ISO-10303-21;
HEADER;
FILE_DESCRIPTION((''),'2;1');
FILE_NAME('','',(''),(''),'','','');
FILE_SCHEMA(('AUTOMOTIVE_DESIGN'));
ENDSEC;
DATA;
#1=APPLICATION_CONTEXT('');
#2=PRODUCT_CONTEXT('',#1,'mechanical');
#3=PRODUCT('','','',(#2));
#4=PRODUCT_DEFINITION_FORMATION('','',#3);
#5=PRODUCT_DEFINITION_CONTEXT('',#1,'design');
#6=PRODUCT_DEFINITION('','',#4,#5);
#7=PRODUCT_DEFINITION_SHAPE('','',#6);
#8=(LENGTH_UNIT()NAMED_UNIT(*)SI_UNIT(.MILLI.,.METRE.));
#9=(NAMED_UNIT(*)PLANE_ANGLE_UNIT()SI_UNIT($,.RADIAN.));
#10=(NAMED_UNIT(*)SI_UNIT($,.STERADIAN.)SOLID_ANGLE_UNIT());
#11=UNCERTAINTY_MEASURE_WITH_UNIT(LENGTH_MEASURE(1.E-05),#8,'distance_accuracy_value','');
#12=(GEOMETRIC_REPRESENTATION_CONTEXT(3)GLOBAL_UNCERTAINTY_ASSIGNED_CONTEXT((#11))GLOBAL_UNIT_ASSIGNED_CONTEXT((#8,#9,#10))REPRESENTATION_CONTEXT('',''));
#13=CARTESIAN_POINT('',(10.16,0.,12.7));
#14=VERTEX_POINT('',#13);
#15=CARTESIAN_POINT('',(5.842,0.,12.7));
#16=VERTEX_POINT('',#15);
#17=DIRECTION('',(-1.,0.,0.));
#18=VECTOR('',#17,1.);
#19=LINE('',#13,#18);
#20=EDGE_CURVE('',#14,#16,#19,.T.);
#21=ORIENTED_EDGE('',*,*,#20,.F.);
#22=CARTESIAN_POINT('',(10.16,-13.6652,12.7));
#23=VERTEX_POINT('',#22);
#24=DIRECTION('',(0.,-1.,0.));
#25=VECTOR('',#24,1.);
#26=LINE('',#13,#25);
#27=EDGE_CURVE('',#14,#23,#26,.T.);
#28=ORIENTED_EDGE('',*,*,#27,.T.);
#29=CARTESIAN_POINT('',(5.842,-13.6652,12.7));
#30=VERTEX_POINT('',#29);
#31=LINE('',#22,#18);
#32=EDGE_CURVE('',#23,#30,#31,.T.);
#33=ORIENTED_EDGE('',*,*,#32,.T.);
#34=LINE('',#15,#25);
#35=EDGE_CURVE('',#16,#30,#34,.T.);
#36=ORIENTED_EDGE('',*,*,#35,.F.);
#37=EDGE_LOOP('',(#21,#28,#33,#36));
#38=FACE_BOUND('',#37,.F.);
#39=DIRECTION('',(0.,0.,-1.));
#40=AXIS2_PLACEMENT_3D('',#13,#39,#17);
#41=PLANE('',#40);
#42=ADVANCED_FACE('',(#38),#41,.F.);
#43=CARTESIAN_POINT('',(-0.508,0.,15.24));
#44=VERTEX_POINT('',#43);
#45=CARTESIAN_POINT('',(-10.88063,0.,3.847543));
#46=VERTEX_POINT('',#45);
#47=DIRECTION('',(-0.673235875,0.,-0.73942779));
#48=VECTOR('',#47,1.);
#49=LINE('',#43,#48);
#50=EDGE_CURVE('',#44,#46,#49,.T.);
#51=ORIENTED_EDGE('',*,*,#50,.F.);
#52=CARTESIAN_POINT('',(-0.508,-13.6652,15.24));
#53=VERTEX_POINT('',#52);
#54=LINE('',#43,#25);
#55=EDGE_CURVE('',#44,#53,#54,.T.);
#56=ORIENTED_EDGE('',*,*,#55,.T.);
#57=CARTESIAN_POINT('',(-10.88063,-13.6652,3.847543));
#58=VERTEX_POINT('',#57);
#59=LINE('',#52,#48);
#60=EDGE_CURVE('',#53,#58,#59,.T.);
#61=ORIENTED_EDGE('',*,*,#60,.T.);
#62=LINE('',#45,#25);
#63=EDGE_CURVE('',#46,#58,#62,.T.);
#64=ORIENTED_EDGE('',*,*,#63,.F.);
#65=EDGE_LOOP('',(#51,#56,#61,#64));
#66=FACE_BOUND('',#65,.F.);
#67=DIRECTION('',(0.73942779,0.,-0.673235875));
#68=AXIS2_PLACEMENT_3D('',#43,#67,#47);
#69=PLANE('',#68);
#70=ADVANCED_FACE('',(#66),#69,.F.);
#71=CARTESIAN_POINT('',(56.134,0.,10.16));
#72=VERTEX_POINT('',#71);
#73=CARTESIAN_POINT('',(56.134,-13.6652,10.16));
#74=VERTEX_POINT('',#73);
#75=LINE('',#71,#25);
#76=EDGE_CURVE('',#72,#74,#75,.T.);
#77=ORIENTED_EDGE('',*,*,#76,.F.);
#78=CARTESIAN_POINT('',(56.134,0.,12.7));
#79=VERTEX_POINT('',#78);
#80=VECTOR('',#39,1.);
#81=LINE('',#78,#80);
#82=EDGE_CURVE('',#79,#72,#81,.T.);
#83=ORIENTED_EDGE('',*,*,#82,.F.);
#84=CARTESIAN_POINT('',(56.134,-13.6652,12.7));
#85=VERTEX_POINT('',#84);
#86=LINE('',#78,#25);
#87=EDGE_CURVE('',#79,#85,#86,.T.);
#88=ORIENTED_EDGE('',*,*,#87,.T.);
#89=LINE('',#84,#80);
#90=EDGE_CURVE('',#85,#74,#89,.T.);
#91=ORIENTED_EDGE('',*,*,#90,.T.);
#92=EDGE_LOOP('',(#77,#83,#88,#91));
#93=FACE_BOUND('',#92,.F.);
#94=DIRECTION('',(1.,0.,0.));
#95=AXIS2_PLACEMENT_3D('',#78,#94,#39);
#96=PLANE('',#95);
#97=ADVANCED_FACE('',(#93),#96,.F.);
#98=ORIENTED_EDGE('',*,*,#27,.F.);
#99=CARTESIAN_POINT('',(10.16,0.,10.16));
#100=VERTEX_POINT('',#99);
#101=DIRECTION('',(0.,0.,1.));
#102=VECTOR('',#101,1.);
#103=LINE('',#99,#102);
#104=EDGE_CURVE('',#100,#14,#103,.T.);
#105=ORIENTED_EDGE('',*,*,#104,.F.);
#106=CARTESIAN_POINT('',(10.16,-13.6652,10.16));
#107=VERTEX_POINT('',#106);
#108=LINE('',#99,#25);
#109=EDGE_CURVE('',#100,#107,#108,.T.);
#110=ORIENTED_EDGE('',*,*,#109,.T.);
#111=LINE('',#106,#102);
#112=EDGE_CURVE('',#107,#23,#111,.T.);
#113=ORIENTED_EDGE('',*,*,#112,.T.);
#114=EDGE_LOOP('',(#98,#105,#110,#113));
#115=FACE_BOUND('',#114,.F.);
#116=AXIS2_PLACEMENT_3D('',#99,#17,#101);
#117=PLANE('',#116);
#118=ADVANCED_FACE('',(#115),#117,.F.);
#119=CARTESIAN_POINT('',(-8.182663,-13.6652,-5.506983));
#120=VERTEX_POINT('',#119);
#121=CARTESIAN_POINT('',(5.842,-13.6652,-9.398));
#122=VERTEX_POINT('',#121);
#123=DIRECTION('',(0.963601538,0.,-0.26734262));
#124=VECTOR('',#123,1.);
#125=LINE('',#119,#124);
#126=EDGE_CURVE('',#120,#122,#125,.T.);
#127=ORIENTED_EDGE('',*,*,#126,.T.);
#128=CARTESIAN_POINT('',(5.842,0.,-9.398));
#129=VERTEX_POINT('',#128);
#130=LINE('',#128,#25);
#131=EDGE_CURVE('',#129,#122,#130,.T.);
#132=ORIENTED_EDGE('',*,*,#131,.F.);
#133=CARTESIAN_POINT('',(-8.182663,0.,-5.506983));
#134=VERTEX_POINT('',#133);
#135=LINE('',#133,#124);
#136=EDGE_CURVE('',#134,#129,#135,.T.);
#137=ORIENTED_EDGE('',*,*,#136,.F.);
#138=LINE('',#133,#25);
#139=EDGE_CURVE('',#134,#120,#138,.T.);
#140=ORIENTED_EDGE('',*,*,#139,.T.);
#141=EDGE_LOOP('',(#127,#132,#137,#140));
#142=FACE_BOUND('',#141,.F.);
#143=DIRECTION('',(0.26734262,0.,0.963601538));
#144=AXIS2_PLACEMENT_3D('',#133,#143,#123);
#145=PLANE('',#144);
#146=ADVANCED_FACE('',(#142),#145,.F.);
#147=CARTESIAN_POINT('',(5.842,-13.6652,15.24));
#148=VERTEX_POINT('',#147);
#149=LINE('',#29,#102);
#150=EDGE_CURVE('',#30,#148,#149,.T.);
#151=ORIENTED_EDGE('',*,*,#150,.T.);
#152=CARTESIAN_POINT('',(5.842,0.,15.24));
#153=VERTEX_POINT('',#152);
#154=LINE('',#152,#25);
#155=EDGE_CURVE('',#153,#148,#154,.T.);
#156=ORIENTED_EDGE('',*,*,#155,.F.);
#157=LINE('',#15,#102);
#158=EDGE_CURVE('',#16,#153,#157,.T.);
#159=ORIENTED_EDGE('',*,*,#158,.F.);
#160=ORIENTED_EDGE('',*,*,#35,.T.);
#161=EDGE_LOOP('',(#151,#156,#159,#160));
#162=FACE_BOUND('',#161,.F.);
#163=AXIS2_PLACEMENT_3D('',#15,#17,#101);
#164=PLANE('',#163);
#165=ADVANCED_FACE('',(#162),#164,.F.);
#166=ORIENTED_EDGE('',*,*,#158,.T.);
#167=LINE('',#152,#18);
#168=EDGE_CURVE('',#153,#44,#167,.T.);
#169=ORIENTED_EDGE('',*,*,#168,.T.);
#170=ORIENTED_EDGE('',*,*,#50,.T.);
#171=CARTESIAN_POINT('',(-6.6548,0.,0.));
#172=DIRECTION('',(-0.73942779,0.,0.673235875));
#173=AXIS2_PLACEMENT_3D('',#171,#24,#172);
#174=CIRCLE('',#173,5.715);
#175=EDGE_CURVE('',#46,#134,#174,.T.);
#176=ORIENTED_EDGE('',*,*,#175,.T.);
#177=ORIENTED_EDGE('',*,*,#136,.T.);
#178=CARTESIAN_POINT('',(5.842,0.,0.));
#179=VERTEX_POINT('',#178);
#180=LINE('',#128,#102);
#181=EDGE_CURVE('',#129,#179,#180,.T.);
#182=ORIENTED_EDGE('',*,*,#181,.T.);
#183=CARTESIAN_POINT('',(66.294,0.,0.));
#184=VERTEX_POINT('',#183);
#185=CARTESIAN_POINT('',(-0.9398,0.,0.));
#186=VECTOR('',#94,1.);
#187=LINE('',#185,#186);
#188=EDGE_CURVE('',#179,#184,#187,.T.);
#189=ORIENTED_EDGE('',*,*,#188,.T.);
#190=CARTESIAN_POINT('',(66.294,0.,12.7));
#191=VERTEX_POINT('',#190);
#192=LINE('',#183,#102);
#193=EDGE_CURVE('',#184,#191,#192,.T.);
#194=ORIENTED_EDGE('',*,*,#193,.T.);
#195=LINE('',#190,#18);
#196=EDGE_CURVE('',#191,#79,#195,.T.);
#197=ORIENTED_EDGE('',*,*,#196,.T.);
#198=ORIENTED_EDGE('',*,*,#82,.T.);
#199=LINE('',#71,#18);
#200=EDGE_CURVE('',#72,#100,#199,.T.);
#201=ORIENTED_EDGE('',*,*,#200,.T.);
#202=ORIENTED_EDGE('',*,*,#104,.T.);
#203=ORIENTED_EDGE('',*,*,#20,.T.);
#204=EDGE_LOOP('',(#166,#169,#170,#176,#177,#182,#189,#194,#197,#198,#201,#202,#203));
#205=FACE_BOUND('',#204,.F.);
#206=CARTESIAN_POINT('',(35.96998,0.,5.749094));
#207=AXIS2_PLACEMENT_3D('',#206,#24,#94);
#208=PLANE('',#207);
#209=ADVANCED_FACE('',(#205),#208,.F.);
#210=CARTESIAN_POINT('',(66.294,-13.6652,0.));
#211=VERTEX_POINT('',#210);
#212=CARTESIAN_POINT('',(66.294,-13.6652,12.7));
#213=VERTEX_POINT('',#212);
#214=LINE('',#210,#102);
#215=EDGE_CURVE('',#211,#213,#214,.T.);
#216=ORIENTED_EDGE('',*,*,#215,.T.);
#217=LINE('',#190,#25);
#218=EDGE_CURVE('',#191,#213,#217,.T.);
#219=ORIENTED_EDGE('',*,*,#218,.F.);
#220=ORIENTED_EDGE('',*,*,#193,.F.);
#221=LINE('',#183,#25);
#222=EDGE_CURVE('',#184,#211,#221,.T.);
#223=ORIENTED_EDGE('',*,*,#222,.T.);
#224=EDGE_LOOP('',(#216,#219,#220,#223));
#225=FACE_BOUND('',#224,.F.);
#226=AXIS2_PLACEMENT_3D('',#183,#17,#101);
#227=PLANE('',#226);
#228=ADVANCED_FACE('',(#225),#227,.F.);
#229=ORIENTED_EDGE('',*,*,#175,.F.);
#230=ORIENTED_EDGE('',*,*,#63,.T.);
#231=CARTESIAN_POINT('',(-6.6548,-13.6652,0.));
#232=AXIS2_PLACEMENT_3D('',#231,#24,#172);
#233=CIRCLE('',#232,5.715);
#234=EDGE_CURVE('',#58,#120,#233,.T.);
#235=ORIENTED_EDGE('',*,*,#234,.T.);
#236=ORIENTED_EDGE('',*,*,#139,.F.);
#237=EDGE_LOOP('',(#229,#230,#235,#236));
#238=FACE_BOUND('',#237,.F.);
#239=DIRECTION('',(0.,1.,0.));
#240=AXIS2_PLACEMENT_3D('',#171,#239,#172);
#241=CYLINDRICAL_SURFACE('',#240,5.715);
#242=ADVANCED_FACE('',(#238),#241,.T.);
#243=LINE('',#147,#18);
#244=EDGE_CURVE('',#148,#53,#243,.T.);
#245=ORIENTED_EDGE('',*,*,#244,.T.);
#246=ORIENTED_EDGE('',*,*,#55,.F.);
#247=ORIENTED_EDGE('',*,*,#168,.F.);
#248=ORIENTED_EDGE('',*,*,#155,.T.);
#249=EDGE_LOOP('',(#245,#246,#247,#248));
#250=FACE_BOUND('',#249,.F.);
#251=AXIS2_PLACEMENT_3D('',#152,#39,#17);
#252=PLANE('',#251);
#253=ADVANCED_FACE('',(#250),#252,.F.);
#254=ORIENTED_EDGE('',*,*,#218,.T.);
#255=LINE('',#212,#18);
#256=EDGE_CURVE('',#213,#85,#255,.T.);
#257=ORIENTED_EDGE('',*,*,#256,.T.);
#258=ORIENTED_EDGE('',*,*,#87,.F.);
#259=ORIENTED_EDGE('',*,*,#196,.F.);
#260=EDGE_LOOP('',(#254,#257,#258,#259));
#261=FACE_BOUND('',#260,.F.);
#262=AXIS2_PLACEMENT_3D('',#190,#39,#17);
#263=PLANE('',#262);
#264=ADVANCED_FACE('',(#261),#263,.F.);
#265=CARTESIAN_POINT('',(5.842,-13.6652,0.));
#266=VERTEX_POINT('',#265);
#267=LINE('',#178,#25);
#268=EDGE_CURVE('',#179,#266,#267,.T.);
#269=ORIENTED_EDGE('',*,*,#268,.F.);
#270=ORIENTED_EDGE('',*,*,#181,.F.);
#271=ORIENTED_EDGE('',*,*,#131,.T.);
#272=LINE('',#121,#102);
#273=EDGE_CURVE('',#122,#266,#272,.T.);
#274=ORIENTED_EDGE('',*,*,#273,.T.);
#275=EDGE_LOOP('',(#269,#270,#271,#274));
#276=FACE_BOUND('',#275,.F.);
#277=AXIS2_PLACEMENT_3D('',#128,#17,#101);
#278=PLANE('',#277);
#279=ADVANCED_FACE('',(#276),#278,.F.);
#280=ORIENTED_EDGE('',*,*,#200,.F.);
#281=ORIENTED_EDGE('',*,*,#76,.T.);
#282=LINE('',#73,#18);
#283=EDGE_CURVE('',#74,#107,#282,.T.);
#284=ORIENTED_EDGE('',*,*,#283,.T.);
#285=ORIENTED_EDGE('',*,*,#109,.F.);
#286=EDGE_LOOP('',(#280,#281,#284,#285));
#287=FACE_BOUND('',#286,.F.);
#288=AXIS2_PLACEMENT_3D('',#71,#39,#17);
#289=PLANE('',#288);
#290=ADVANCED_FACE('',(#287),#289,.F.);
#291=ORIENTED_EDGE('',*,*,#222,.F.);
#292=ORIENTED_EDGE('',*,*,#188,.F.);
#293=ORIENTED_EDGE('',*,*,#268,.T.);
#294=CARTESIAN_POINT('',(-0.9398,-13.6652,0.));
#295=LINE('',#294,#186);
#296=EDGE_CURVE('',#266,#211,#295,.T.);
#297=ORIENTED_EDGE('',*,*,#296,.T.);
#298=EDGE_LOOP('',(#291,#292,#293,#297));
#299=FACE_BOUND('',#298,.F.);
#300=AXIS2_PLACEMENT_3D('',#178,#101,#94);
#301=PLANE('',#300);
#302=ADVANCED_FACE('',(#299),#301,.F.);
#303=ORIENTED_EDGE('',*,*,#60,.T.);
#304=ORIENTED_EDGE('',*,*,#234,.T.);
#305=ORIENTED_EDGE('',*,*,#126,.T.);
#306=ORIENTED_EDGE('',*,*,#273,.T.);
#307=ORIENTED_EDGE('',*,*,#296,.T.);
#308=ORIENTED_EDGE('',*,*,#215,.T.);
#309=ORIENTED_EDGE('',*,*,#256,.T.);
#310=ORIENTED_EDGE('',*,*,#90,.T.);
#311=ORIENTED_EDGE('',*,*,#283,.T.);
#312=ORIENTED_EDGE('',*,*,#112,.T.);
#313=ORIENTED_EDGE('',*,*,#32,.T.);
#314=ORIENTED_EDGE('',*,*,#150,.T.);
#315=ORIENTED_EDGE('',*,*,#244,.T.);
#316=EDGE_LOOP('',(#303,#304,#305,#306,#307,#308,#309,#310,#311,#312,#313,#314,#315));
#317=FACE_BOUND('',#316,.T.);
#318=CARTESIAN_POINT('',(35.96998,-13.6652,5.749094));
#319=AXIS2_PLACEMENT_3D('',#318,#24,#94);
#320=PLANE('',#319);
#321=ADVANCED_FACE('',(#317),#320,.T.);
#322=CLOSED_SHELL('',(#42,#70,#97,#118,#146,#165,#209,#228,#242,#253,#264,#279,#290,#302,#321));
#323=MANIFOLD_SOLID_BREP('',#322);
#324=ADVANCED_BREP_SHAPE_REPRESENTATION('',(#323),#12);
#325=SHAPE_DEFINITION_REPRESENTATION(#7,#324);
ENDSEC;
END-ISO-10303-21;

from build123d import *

# Parameters (mm, degrees)
F0_R     = 3.175
F0_W     = 5.842
F0_H     = 12.7
F1_DEPTH = 13.6652


with BuildPart() as f1:
    # F0 (on Front) → F1 (new body)
    with BuildSketch(Plane.XZ):
        Polygon((5.842, 12.7), (5.842, 0), (66.294, 0), (66.294, 12.7), (56.134, 12.7), (56.134, 10.16), (10.16, 10.16), (10.16, 12.7), align=None)
        with BuildLine():
            ThreePointArc((-8.1826630726, -5.5069827884), (-3.1957909266, -4.5493385486), (-0.9398, 0))
            ThreePointArc((-0.9398, 0), (-4.5919612295, 5.3297205562), (-10.8806298187, 3.8475430269))
            ThreePointArc((-10.8806298187, 3.8475430269), (-12.1459778134, -1.5837270034), (-8.1826630726, -5.5069827884))
        make_face()
        with Locations((-6.6548, 0)):
            Circle(F0_R, mode=Mode.SUBTRACT)
        with BuildLine():
            Line((-0.9398, 0), (0, 0))
            Line((0, 0), (0, 12.7))
            Line((0, 12.7), (5.842, 12.7))
            Line((5.842, 12.7), (5.842, 15.24))
            Line((5.842, 15.24), (-0.508, 15.24))
            Line((-0.508, 15.24), (-10.8806298187, 3.8475430269))
            ThreePointArc((-10.8806298187, 3.8475430269), (-4.5919612295, 5.3297205562), (-0.9398, 0))
        make_face()
        with Locations((2.921, 6.35)):
            Rectangle(F0_W, F0_H)
        with BuildLine():
            Line((5.842, 0), (0, 0))
            Line((0, 0), (-0.9398, 0))
            ThreePointArc((-0.9398, 0), (-3.1957909266, -4.5493385486), (-8.1826630726, -5.5069827884))
            Line((-8.1826630726, -5.5069827884), (5.842, -9.398))
            Line((5.842, -9.398), (5.842, 0))
        make_face()
        with Locations((-6.6548, 0)):
            Circle(F0_R)
    extrude(amount=F1_DEPTH)


solid = f1.part
